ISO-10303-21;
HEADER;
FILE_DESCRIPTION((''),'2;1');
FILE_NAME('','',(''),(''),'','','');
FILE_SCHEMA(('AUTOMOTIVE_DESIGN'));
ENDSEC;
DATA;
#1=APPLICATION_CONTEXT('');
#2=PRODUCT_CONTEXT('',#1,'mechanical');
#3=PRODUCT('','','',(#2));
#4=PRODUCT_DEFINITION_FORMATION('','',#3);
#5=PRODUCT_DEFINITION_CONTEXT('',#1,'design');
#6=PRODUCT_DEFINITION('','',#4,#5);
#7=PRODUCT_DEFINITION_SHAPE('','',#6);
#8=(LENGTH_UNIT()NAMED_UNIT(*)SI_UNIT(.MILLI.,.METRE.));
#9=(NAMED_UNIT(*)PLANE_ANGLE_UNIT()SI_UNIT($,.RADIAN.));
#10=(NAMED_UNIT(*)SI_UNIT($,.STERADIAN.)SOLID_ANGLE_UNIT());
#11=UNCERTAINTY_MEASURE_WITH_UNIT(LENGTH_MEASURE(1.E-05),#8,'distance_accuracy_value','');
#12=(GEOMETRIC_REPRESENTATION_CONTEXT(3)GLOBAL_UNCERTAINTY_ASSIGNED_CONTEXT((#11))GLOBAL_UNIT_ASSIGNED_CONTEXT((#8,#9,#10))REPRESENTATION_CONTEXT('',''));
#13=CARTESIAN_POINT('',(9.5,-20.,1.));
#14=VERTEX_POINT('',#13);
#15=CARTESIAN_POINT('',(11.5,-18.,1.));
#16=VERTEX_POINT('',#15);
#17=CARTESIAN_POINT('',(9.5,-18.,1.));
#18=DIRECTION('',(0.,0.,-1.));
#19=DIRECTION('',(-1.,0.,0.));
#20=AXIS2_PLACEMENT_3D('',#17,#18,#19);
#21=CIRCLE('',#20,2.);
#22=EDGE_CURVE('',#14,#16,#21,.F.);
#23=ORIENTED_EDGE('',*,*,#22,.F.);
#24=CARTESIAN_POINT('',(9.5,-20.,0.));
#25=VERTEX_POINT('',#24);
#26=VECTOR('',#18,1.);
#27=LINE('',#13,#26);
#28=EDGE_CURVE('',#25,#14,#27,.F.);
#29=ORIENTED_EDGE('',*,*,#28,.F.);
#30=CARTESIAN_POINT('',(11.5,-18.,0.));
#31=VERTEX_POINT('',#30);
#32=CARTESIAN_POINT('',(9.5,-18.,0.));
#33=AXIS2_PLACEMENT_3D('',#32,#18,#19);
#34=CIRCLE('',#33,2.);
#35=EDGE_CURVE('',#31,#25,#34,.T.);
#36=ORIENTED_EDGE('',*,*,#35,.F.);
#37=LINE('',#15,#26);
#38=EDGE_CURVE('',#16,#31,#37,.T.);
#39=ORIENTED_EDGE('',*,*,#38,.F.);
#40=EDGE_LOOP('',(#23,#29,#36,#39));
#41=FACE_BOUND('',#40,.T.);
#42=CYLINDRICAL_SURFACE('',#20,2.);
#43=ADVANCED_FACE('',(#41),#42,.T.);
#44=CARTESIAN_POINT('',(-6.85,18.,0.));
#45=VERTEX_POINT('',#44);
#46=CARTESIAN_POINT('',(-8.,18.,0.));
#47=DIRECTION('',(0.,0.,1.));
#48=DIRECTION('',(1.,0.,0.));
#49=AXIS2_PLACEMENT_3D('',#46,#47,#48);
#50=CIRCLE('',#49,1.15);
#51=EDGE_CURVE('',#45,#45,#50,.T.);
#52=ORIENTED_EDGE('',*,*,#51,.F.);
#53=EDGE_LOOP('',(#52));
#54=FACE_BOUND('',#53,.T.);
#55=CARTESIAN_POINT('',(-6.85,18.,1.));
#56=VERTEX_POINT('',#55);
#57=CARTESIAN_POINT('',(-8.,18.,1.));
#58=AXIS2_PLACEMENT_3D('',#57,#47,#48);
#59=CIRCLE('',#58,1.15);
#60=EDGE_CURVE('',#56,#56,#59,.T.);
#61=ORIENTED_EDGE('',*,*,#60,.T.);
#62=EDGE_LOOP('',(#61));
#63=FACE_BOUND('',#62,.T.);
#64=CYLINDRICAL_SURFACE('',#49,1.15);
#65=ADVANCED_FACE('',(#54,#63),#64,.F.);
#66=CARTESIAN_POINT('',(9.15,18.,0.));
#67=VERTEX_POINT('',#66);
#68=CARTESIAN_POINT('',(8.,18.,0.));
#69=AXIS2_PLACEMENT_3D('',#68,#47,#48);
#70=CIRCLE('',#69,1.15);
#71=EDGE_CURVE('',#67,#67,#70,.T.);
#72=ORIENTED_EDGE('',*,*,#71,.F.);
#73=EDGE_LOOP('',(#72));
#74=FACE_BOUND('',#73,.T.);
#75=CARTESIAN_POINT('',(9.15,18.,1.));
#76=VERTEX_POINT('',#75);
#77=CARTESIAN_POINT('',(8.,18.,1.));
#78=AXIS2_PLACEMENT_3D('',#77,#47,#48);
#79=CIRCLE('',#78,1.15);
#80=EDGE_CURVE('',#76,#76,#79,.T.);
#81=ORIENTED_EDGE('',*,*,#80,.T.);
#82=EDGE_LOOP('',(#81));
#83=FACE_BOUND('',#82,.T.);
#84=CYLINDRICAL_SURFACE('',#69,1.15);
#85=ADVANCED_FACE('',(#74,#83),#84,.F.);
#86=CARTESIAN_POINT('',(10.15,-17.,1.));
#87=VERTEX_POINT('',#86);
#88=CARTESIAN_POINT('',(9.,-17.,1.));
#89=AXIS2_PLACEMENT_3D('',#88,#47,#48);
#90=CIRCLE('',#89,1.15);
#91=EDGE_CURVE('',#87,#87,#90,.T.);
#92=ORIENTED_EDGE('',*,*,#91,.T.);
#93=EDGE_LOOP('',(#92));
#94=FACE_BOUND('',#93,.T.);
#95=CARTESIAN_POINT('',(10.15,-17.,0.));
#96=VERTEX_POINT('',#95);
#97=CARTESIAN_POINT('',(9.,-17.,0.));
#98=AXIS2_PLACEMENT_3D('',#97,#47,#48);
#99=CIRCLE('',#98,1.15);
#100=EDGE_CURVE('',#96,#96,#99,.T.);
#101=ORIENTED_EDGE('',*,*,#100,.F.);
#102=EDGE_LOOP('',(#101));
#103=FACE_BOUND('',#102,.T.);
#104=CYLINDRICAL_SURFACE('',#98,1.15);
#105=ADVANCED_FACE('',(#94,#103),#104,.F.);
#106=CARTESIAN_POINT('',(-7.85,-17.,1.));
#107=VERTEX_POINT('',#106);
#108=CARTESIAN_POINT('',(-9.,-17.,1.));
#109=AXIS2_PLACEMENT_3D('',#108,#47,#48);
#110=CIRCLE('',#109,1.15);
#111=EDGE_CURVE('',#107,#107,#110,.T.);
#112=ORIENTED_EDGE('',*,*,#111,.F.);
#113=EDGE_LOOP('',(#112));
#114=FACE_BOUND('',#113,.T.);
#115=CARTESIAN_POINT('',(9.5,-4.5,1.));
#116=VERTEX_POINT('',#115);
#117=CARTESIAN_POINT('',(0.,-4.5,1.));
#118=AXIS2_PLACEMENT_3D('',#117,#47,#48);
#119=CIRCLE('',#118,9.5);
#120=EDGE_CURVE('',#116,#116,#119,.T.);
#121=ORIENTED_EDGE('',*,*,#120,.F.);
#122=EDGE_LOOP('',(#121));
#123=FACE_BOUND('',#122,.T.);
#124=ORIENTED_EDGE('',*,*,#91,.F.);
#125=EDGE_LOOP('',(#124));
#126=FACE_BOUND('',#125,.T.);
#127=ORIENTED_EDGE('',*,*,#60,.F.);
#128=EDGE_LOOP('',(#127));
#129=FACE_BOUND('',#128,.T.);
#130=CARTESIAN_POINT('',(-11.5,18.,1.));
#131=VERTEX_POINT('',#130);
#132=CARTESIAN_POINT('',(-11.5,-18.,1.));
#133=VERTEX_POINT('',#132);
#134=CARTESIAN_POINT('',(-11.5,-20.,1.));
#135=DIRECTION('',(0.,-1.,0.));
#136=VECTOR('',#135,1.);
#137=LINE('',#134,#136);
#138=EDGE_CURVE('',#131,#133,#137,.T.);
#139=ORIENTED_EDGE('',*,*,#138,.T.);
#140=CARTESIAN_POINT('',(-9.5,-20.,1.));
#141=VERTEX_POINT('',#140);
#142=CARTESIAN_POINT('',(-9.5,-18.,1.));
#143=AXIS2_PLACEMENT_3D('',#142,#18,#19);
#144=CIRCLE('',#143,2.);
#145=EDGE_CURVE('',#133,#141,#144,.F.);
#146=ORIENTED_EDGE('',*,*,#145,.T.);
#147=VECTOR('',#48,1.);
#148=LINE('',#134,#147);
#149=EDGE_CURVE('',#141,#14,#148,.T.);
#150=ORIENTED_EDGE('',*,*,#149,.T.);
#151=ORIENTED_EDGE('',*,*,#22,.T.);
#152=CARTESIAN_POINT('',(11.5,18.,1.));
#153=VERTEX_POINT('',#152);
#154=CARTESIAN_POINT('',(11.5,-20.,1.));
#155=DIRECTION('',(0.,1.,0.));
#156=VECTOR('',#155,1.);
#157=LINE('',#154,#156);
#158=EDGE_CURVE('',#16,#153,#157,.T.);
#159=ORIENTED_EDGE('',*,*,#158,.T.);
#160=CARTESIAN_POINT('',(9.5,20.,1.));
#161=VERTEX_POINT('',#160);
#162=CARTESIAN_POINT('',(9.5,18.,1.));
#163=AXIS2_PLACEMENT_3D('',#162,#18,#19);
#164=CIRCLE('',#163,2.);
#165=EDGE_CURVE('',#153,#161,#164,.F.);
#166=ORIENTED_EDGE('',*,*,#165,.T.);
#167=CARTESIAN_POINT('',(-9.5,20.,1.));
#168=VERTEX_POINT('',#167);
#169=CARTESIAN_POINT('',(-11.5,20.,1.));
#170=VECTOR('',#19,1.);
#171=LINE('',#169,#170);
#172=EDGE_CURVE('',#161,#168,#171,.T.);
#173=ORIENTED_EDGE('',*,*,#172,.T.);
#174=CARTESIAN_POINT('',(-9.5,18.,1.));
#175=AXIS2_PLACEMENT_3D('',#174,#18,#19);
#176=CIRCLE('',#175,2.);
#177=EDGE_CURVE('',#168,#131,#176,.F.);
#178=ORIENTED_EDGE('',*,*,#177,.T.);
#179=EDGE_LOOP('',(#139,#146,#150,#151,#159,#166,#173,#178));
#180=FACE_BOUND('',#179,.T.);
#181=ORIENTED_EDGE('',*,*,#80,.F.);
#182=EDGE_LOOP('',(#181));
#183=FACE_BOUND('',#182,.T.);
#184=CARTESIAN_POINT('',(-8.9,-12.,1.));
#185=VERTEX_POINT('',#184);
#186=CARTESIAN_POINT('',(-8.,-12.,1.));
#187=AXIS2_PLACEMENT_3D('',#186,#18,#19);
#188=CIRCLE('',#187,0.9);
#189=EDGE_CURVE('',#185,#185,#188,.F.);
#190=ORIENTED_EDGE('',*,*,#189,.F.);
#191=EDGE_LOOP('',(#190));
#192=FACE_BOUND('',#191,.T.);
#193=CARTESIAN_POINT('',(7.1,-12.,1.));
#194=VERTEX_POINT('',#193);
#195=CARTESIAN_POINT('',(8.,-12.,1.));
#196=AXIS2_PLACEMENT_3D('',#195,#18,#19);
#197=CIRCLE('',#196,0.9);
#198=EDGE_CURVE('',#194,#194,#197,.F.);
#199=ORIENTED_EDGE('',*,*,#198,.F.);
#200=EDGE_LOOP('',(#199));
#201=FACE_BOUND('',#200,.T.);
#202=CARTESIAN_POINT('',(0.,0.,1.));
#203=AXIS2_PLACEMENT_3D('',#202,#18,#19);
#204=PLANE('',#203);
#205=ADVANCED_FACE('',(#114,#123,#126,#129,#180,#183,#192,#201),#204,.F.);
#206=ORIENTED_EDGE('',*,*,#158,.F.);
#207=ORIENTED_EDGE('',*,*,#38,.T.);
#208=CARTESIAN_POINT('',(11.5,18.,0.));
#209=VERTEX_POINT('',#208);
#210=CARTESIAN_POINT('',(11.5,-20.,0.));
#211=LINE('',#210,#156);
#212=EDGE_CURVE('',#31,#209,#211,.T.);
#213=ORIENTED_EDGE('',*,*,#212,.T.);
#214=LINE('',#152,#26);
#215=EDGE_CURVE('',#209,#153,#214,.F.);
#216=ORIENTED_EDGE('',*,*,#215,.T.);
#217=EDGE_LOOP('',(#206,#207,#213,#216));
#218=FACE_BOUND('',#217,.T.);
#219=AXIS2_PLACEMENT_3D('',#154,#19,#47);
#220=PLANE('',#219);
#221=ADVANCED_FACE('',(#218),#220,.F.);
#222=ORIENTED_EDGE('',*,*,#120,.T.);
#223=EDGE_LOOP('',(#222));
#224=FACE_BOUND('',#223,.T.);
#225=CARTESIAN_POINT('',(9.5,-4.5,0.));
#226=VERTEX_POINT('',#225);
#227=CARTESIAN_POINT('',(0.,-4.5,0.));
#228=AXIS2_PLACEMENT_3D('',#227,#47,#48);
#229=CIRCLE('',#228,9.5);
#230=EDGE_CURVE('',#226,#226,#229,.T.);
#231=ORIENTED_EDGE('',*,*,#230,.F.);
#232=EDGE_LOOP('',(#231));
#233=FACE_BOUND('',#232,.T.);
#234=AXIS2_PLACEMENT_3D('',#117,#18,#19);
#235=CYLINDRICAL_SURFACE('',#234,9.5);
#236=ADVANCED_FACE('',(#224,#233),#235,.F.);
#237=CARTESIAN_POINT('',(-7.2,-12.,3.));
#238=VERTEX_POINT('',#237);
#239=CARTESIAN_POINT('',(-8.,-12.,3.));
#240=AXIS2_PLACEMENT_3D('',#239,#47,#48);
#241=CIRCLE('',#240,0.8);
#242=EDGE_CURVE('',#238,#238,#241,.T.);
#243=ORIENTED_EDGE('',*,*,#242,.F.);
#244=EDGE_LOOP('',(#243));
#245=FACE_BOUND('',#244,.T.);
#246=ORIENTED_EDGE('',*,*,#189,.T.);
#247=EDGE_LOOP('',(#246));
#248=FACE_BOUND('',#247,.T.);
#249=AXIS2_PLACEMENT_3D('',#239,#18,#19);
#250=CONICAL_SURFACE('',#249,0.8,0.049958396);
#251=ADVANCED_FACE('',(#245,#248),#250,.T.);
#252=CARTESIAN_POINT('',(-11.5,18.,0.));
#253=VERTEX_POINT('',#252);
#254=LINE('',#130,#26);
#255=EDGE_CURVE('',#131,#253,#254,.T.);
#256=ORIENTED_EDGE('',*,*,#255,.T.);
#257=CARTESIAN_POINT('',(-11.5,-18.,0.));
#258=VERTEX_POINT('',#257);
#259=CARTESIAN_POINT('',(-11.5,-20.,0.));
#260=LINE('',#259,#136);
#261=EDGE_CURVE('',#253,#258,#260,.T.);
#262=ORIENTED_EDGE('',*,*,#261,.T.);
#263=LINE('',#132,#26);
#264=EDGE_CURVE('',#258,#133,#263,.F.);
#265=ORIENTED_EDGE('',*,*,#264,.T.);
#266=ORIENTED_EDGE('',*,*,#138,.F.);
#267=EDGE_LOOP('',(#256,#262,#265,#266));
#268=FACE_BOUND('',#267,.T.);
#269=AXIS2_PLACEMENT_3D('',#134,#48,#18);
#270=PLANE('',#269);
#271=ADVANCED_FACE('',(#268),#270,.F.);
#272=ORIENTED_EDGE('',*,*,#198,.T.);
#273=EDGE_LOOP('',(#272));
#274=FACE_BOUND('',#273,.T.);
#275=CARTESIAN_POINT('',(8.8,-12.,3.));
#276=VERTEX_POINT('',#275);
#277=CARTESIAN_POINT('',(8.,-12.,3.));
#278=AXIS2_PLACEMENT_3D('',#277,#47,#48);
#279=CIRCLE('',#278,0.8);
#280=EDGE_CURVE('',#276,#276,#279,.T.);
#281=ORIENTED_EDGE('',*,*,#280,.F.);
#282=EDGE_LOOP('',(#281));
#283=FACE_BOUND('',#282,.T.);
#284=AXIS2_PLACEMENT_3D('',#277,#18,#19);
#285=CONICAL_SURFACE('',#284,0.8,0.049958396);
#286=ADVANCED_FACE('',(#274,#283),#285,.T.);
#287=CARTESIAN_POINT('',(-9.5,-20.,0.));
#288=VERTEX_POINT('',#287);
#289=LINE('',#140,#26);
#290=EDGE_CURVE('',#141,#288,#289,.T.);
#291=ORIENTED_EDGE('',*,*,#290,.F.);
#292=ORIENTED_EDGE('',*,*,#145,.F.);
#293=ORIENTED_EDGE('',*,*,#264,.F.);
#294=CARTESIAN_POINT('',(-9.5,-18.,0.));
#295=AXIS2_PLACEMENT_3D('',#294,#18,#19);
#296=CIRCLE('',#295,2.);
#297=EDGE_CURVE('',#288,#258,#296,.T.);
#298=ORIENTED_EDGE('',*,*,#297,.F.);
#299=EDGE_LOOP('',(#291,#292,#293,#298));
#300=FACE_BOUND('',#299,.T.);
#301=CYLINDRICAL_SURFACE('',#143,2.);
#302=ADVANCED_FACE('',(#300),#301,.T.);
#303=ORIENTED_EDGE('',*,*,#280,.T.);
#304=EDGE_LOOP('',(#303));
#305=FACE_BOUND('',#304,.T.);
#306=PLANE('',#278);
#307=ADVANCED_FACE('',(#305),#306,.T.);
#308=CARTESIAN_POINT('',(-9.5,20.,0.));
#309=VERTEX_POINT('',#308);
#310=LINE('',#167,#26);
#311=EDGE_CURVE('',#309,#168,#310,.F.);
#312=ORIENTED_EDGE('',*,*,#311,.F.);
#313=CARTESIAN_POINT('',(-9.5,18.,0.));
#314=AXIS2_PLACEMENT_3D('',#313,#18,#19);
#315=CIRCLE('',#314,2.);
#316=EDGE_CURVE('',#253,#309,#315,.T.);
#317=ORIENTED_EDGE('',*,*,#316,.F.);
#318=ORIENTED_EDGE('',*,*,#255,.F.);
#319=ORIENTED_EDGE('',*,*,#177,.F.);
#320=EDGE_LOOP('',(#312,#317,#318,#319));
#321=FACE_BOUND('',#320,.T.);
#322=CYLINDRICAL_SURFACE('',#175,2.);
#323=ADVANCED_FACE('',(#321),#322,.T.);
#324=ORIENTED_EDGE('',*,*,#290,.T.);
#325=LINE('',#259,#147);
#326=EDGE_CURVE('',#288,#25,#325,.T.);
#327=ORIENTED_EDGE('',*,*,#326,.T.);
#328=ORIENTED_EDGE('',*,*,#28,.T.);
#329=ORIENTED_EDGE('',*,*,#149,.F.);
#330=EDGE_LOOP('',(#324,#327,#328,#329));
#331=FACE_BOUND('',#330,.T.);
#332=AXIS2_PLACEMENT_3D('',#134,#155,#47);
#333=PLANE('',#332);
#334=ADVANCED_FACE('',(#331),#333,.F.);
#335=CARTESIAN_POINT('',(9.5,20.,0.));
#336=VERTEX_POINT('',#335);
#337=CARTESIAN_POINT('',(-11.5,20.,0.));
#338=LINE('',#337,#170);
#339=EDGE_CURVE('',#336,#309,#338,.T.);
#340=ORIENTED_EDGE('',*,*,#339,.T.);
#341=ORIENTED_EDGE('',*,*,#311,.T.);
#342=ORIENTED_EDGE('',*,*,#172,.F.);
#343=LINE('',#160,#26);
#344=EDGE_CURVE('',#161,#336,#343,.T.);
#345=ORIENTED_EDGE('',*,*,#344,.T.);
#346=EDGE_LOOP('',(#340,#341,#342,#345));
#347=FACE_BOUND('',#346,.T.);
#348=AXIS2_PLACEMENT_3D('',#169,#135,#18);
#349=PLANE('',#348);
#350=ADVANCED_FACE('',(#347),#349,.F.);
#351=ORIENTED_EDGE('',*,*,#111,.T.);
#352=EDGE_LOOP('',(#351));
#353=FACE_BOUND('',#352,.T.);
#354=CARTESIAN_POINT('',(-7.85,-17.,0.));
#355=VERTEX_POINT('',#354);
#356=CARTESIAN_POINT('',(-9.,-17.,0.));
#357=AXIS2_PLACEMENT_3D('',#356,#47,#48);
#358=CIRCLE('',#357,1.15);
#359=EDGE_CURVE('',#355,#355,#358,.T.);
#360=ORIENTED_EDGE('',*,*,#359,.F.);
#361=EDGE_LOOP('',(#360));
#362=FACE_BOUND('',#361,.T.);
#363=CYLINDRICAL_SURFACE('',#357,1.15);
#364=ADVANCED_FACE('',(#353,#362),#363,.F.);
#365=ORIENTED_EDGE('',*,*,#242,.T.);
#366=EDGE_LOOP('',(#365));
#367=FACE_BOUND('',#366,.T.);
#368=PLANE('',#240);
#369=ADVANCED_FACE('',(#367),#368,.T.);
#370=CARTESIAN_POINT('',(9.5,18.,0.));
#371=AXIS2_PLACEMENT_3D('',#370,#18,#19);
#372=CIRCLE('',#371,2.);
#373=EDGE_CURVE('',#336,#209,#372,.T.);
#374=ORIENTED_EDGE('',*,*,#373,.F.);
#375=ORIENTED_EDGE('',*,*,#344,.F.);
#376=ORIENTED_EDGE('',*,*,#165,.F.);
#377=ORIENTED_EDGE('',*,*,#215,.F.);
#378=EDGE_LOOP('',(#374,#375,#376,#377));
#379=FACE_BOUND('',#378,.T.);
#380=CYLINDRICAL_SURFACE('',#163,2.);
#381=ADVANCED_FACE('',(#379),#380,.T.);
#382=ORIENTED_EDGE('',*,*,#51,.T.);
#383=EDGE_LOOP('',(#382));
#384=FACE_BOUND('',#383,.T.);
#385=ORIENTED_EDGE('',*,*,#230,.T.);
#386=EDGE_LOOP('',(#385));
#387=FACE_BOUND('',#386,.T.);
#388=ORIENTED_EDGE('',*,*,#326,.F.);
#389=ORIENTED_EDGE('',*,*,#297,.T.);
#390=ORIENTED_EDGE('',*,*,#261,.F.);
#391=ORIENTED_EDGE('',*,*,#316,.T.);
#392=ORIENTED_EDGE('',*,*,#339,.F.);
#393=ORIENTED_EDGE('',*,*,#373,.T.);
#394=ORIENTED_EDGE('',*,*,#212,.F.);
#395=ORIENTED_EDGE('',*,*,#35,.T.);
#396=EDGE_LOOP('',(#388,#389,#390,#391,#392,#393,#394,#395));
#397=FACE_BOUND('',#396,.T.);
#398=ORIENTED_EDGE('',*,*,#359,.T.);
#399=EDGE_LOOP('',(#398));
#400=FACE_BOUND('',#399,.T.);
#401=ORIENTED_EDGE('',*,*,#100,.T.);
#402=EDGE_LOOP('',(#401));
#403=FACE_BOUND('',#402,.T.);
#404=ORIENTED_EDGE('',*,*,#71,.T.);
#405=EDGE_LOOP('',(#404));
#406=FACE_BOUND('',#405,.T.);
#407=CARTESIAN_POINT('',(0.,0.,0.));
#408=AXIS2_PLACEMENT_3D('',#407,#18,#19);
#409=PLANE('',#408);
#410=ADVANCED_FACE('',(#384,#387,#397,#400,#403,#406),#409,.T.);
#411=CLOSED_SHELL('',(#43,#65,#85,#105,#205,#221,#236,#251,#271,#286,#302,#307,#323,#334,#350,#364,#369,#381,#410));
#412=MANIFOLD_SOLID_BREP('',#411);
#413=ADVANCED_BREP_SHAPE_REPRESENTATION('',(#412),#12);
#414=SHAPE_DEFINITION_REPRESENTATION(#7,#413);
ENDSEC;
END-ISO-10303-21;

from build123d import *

# Parameters (mm, degrees)
SKETCH_1_W          = 23
SKETCH_1_H          = 40
SKETCH_1_R          = 9.5
EXTRUDE_1_DEPTH     = 1
FILLET_1_R          = 2
SKETCH_3_R          = 1.15
CUT_EXTRUDE_1_DEPTH = 24.092206478
SKETCH_4_R          = 0.9
EXTRUDE_2_DEPTH     = 2
CHAMFER_1_SIZE      = 2
CHAMFER_1_SIZE_2    = 0.1


with BuildPart() as part:
    # 草图1 → 凸台-拉伸1 (new body)
    with BuildSketch(Plane.XY):
        Rectangle(SKETCH_1_W, SKETCH_1_H)
        with Locations((0, -4.5)):
            Circle(SKETCH_1_R, mode=Mode.SUBTRACT)
    extrude(amount=EXTRUDE_1_DEPTH)

    # 圆角1
    fillet_1_edges = [part.edges().sort_by_distance(p)[0] for p in [
        (11.5, -20, 0.5),
        (-11.5, -20, 0.5),
        (-11.5, 20, 0.5),
        (11.5, 20, 0.5),
    ]]
    fillet(fillet_1_edges, radius=FILLET_1_R)

    # 草图3 → 切除-拉伸1 (cut, through all)
    with BuildSketch(Plane.XY.offset(1)):
        with Locations((-8, 18)):
            Circle(SKETCH_3_R)
        with Locations((8, 18)):
            Circle(SKETCH_3_R)
        with Locations((-9, -17)):
            Circle(SKETCH_3_R)
        with Locations((9, -17)):
            Circle(SKETCH_3_R)
    extrude(amount=-CUT_EXTRUDE_1_DEPTH, mode=Mode.SUBTRACT)

    # 草图4 → 凸台-拉伸2 (add)
    with BuildSketch(Plane.XY.offset(1)):
        with Locations(Location((-8, -12, 0), (0, 0, 180))):
            Circle(SKETCH_4_R)
        with Locations(Location((8, -12, 0), (0, 0, 180))):
            Circle(SKETCH_4_R)
    extrude(amount=EXTRUDE_2_DEPTH)

    # 倒角1
    # the kernel refuses this chamfer: 2, 0.1 mm, written as the material it takes off along each edge
    with BuildSketch(Plane(origin=(-8, -12, 3), x_dir=(-1, 0, 0), z_dir=(0, 1, 0))) as chamfer_1_piece_1_section:
        Polygon((0.9, -CHAMFER_1_SIZE), (0.9 - CHAMFER_1_SIZE_2, 0), (0.9, 0), align=None)
    chamfer_1_piece_1 = revolve(axis=Axis((-8, -12, 3), (0, 0, 1)), mode=Mode.PRIVATE)
    chamfer_1_piece_1 = split(chamfer_1_piece_1, bisect_by=Plane(origin=(-7.141866516, -12, 1), z_dir=(0, 0, 1)), keep=Keep.TOP, mode=Mode.PRIVATE)
    add(chamfer_1_piece_1, mode=Mode.SUBTRACT)
    with BuildSketch(Plane(origin=(8, -12, 3), x_dir=(-1, 0, 0), z_dir=(0, 1, 0))) as chamfer_1_piece_2_section:
        Polygon((0.9, -CHAMFER_1_SIZE), (0.9 - CHAMFER_1_SIZE_2, 0), (0.9, 0), align=None)
    chamfer_1_piece_2 = revolve(axis=Axis((8, -12, 3), (0, 0, 1)), mode=Mode.PRIVATE)
    chamfer_1_piece_2 = split(chamfer_1_piece_2, bisect_by=Plane(origin=(8.858133484, -12, 1), z_dir=(0, 0, 1)), keep=Keep.TOP, mode=Mode.PRIVATE)
    add(chamfer_1_piece_2, mode=Mode.SUBTRACT)


solid = part.part
